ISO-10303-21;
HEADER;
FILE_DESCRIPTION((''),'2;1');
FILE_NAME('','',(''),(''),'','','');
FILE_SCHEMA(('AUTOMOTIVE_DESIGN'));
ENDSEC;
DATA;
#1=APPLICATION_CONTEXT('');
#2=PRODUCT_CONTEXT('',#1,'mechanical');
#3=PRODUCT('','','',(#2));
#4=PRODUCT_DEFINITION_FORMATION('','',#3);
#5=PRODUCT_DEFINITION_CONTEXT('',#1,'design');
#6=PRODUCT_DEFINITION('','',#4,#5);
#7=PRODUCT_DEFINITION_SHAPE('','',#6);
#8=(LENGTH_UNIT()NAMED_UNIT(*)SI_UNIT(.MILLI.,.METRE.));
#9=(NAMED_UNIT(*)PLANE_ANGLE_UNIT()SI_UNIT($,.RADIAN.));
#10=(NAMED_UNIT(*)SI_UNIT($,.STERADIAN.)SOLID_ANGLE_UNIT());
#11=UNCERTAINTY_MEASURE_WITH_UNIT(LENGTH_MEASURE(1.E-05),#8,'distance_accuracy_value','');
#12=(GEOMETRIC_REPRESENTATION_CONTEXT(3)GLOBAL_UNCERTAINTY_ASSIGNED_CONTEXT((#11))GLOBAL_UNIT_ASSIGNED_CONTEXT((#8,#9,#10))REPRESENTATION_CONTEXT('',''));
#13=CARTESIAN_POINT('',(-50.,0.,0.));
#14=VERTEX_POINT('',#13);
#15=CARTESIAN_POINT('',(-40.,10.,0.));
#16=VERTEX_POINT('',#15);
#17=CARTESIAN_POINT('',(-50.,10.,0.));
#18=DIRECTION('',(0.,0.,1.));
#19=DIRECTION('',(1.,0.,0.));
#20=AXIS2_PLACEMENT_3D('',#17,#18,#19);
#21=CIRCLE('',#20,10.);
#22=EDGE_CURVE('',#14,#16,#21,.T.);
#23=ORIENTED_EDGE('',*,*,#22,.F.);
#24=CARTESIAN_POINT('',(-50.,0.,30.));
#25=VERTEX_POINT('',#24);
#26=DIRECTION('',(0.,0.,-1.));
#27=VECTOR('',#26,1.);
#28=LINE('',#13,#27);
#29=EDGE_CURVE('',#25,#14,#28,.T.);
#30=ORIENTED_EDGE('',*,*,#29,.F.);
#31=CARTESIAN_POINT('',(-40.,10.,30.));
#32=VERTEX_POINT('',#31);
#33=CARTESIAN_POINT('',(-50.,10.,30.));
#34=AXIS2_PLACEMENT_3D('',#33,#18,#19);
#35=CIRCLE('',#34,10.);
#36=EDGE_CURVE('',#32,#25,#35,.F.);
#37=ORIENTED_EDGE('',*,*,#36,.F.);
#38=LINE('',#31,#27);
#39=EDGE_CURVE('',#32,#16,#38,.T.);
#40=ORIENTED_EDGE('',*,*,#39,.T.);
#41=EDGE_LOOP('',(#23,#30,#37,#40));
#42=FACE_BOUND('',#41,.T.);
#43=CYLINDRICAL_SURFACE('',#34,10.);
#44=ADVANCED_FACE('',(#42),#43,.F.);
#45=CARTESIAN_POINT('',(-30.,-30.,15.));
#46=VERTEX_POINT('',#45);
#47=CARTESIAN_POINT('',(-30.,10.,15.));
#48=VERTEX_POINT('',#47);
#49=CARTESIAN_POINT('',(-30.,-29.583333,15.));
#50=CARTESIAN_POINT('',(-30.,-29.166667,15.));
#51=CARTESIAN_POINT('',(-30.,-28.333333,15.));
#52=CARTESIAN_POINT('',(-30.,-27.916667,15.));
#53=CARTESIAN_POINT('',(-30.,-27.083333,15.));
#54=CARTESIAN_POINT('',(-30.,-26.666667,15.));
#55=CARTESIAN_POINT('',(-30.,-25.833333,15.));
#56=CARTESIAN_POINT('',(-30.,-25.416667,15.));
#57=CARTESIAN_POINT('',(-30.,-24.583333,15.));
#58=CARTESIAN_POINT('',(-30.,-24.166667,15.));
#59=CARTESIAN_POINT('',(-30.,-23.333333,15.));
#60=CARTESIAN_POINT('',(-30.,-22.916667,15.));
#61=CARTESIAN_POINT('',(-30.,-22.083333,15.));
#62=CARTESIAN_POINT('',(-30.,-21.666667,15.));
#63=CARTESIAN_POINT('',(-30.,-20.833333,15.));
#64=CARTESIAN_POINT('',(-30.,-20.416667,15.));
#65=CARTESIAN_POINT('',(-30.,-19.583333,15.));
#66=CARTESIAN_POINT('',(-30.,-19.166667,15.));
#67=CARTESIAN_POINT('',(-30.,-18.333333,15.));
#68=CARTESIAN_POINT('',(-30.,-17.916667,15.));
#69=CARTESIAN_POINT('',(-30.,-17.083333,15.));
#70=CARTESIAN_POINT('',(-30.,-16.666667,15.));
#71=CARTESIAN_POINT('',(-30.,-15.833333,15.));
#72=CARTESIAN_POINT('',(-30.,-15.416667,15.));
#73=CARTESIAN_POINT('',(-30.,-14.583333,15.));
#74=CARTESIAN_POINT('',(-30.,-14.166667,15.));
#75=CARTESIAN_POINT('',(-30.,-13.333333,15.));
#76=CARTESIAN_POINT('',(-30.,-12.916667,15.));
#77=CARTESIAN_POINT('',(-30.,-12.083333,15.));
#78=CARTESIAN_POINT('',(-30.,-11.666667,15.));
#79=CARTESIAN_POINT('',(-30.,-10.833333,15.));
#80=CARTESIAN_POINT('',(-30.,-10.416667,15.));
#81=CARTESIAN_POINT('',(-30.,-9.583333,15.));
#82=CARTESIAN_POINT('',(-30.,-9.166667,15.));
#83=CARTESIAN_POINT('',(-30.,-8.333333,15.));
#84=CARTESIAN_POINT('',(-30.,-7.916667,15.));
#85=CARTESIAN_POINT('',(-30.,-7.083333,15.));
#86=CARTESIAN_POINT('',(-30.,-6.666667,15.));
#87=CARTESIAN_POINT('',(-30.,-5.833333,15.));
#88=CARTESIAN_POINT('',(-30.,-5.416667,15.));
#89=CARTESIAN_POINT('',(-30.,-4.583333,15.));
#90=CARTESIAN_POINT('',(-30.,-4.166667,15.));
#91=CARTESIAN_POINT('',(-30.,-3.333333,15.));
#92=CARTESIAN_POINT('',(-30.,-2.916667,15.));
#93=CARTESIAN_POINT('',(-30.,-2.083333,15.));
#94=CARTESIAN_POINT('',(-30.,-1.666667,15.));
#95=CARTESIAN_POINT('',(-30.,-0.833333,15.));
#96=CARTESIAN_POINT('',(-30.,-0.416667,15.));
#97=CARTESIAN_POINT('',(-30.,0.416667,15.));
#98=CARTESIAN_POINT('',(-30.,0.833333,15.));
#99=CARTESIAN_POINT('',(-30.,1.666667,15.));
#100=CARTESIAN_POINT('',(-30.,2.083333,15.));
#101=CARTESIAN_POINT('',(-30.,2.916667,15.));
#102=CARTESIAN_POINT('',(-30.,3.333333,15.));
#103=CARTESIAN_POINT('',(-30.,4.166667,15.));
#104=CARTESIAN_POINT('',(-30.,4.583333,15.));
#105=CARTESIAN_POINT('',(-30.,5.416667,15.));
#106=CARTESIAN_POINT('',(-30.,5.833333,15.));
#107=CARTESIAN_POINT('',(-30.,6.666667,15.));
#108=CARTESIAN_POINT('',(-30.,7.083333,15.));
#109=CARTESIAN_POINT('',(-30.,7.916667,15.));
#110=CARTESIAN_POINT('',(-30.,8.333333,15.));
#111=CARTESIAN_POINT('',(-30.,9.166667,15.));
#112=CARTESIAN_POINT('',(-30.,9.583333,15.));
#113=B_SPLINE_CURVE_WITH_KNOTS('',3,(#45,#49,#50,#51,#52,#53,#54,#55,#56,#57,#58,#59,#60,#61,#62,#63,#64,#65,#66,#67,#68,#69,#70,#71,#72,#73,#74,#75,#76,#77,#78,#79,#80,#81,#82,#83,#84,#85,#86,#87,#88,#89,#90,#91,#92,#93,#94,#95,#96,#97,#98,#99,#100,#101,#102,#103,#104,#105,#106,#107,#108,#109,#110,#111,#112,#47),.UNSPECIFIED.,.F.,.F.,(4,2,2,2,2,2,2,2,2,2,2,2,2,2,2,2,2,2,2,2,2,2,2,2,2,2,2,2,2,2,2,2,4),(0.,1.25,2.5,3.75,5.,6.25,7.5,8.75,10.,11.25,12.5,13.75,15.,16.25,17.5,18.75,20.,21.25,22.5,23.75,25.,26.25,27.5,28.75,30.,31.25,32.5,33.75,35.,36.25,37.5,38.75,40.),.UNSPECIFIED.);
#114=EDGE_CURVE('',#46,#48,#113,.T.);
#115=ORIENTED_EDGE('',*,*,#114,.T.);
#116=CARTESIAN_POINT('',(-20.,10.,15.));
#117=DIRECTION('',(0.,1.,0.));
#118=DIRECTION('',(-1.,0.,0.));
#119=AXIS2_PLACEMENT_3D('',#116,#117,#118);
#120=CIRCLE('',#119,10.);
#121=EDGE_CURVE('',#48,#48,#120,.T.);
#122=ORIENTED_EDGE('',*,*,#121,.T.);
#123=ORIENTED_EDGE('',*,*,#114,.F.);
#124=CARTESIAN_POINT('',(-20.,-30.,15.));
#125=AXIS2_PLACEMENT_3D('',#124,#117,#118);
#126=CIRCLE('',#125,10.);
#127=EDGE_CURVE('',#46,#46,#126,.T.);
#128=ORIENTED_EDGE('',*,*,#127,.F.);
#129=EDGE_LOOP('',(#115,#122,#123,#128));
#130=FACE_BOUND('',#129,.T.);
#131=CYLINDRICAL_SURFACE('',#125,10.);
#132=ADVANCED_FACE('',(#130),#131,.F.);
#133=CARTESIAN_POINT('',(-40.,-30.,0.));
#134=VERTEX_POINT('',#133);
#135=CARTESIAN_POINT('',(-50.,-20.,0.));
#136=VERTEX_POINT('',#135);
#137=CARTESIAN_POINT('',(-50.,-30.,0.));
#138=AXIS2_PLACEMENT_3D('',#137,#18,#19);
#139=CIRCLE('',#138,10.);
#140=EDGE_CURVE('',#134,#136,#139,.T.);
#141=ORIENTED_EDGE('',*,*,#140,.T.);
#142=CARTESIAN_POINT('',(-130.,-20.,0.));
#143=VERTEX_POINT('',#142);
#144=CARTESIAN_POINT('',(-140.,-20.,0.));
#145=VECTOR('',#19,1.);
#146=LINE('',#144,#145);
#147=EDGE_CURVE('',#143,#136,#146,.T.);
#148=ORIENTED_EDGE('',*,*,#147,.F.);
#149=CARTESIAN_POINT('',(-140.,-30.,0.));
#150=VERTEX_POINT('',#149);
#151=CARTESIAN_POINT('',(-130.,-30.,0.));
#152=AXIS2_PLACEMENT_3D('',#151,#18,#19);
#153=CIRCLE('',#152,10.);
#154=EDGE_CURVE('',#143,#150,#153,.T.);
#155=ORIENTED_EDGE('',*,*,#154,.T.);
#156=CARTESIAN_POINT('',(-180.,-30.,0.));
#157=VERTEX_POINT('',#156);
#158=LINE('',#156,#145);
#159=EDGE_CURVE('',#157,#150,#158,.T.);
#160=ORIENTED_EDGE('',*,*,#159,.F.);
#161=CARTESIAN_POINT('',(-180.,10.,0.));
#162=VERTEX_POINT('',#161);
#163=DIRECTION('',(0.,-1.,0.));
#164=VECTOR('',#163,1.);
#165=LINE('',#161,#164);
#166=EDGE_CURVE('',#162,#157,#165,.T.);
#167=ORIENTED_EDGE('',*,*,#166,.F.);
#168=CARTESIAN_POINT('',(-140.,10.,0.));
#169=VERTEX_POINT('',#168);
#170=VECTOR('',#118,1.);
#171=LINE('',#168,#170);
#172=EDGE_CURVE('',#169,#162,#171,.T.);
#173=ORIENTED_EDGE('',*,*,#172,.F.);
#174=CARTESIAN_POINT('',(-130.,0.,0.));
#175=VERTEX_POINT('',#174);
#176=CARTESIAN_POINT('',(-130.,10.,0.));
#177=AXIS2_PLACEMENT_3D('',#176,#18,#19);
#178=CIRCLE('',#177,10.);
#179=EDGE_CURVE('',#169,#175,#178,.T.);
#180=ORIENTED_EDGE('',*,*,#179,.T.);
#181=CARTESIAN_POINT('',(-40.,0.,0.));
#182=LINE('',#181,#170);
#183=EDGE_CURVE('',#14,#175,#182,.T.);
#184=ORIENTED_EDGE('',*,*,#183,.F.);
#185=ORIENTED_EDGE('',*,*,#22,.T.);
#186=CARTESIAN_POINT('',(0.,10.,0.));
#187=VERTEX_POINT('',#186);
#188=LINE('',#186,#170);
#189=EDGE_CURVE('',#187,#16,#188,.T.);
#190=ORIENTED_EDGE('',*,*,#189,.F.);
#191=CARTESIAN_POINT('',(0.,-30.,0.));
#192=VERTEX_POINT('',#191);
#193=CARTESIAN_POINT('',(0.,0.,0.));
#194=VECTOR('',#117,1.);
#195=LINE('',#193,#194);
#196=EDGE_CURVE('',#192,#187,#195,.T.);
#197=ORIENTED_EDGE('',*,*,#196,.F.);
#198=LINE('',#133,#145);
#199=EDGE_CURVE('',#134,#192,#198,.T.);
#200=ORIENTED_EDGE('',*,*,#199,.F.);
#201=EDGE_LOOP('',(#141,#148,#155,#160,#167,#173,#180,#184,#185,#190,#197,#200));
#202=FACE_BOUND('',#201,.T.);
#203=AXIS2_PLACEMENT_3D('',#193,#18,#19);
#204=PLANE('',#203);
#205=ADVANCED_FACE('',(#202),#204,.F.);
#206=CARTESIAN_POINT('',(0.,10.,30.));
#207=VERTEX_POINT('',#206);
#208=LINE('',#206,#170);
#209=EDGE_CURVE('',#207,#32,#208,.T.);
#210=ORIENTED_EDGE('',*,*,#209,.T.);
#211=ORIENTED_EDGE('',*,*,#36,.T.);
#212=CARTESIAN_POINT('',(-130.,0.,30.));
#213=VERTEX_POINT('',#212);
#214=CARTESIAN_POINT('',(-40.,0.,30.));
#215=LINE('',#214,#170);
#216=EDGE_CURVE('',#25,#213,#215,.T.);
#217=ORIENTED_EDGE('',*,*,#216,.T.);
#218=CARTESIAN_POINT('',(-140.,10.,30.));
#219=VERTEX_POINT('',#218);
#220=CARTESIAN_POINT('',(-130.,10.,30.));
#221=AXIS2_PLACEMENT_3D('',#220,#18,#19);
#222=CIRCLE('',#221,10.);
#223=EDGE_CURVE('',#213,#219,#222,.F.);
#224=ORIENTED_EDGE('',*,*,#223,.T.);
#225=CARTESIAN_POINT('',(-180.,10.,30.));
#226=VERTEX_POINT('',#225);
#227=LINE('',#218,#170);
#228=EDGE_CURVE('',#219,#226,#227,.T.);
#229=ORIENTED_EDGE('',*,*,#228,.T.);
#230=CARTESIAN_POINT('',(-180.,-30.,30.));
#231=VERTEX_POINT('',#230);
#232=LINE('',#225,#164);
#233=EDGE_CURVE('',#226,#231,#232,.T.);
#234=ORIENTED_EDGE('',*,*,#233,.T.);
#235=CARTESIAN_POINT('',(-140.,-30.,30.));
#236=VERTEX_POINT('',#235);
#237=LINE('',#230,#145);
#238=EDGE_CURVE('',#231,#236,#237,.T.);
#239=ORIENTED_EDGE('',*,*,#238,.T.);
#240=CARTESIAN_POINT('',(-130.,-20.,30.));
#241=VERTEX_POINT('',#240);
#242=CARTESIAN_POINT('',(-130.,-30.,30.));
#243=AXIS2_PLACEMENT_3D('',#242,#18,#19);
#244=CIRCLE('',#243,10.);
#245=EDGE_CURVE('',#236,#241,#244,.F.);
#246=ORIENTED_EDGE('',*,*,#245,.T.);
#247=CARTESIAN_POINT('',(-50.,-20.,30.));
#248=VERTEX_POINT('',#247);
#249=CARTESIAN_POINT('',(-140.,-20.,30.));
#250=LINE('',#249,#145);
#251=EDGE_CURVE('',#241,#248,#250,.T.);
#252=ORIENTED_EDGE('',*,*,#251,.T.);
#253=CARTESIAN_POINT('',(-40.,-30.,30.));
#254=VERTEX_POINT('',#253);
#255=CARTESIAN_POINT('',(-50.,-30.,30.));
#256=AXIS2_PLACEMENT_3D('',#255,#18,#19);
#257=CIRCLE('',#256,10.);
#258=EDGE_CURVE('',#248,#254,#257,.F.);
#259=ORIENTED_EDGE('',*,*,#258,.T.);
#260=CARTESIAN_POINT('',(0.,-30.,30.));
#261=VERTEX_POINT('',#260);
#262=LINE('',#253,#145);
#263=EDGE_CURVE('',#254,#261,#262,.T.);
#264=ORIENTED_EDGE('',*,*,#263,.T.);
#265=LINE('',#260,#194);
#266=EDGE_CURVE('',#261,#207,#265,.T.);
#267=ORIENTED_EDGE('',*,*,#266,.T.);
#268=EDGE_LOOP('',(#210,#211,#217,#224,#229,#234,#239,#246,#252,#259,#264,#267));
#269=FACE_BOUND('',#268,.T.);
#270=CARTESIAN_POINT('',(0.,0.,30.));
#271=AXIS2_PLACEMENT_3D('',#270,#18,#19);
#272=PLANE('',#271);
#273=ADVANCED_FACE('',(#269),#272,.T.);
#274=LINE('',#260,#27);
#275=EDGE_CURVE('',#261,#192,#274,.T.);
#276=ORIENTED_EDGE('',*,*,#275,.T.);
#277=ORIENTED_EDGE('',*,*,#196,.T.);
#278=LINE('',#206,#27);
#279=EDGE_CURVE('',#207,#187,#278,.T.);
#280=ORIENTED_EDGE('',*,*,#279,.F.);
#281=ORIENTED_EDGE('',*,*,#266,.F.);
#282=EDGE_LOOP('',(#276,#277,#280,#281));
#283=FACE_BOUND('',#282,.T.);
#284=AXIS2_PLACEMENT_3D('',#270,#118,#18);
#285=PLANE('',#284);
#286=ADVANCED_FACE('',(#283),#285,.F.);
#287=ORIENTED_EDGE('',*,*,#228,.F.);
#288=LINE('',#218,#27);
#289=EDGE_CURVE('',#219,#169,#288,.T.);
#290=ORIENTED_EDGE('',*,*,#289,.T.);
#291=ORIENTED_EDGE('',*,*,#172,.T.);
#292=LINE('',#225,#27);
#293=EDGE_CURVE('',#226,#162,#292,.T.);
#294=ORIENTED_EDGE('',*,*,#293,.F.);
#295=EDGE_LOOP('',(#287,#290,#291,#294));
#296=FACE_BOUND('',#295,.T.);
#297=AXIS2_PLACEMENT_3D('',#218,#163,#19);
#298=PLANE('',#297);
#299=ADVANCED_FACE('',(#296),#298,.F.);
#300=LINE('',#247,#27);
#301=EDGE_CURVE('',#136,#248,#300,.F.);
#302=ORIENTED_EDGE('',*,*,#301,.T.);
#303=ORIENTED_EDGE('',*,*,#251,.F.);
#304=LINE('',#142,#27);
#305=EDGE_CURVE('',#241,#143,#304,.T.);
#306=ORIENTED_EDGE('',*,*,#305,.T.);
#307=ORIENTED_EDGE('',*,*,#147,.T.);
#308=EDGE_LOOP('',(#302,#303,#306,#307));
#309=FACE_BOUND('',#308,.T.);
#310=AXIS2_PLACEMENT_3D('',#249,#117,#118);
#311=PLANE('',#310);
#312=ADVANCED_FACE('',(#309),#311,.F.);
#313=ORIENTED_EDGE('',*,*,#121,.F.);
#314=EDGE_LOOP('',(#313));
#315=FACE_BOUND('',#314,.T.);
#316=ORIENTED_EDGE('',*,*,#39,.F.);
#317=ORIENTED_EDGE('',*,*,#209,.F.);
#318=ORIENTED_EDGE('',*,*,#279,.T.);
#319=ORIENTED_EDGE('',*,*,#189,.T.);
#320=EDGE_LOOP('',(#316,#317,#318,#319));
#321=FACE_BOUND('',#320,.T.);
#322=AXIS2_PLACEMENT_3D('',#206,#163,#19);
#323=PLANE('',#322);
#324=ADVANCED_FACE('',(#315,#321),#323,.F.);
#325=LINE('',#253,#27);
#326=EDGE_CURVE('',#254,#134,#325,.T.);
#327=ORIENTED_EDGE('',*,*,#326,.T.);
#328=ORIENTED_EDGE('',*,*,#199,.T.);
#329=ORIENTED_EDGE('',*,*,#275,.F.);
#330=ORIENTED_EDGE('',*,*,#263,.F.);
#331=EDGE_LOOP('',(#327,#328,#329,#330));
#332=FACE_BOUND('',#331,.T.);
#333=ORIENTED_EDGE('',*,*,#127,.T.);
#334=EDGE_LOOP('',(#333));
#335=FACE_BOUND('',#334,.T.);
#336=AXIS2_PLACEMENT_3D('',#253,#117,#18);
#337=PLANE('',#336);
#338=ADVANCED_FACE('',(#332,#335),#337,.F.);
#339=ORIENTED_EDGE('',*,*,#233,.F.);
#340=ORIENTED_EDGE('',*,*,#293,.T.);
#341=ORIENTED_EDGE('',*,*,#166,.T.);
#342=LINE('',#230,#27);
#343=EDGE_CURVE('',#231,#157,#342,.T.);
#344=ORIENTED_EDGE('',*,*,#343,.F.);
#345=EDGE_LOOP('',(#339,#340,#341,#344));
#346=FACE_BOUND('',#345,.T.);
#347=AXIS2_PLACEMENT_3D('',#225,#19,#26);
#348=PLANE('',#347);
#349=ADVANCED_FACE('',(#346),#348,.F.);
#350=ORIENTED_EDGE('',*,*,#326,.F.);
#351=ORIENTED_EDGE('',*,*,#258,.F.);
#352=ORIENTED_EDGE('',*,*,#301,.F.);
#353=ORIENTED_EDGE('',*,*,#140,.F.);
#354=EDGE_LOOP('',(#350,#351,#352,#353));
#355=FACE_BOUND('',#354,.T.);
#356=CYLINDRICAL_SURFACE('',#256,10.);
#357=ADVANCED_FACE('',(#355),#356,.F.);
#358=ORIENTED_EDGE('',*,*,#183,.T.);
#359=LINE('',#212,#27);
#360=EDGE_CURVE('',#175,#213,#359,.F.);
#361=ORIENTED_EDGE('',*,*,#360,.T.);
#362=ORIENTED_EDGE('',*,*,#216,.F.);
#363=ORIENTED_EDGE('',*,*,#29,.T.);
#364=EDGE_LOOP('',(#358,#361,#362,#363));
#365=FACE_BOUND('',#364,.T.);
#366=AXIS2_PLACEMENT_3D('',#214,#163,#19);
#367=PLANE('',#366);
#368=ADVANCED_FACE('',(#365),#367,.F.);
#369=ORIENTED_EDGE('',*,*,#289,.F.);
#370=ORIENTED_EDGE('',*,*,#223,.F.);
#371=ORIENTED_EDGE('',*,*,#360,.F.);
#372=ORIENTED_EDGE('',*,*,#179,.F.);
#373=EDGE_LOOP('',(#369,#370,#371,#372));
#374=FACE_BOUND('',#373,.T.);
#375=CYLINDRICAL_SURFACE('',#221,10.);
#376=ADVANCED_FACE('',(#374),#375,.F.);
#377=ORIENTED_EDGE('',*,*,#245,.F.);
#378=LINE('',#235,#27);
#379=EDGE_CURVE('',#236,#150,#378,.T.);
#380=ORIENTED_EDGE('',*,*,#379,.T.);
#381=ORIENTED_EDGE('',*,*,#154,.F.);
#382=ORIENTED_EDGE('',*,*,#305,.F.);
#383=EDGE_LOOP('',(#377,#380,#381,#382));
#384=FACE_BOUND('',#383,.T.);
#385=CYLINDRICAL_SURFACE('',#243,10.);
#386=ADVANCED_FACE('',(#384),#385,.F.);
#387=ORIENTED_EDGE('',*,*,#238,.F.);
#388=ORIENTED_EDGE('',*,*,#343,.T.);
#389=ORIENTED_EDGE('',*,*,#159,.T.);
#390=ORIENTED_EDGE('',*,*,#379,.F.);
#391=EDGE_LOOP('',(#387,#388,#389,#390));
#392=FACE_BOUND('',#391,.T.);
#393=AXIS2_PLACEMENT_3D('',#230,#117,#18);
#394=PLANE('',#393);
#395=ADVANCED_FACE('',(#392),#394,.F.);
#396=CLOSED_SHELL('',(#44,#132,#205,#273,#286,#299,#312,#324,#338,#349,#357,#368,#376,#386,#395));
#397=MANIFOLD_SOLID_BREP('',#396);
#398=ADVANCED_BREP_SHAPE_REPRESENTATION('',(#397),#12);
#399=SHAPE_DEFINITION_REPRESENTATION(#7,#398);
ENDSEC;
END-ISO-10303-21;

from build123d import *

# Parameters (mm, degrees)
BOSS_EXTRUDE2_DEPTH = 30
FILLET1_R           = 10
SKETCH3_R           = 10
CUT_EXTRUDE1_DEPTH  = 187.815416923


with BuildPart() as part:
    # Sketch2 → Boss-Extrude2 (new body)
    with BuildSketch(Plane.XY):
        Polygon((0, 0), (0, 10), (-40, 10), (-40, 0), (-140, 0), (-140, 10), (-180, 10), (-180, -30), (-140, -30), (-140, -20), (-40, -20), (-40, -30), (0, -30), align=None)
    extrude(amount=BOSS_EXTRUDE2_DEPTH)

    # Fillet1
    fillet1_edges = [part.edges().sort_by_distance(p)[0] for p in [
        (-40, -20, 15),
        (-140, -20, 15),
        (-40, 0, 15),
        (-140, 0, 15),
    ]]
    fillet(fillet1_edges, radius=FILLET1_R - 0.0001)  # a hair under: the kernel refuses the full size

    # Sketch3 → Cut-Extrude1 (cut, through all)
    with BuildSketch(Plane(origin=(0, 10, 0), x_dir=(1, 0, 0), z_dir=(0, 1, 0))):
        with Locations(Location((-20, -15, 0), (0, 0, 180))):
            Circle(SKETCH3_R)
        with Locations((-200, -15)):
            Circle(SKETCH3_R)
    extrude(amount=-CUT_EXTRUDE1_DEPTH, mode=Mode.SUBTRACT)


solid = part.part
